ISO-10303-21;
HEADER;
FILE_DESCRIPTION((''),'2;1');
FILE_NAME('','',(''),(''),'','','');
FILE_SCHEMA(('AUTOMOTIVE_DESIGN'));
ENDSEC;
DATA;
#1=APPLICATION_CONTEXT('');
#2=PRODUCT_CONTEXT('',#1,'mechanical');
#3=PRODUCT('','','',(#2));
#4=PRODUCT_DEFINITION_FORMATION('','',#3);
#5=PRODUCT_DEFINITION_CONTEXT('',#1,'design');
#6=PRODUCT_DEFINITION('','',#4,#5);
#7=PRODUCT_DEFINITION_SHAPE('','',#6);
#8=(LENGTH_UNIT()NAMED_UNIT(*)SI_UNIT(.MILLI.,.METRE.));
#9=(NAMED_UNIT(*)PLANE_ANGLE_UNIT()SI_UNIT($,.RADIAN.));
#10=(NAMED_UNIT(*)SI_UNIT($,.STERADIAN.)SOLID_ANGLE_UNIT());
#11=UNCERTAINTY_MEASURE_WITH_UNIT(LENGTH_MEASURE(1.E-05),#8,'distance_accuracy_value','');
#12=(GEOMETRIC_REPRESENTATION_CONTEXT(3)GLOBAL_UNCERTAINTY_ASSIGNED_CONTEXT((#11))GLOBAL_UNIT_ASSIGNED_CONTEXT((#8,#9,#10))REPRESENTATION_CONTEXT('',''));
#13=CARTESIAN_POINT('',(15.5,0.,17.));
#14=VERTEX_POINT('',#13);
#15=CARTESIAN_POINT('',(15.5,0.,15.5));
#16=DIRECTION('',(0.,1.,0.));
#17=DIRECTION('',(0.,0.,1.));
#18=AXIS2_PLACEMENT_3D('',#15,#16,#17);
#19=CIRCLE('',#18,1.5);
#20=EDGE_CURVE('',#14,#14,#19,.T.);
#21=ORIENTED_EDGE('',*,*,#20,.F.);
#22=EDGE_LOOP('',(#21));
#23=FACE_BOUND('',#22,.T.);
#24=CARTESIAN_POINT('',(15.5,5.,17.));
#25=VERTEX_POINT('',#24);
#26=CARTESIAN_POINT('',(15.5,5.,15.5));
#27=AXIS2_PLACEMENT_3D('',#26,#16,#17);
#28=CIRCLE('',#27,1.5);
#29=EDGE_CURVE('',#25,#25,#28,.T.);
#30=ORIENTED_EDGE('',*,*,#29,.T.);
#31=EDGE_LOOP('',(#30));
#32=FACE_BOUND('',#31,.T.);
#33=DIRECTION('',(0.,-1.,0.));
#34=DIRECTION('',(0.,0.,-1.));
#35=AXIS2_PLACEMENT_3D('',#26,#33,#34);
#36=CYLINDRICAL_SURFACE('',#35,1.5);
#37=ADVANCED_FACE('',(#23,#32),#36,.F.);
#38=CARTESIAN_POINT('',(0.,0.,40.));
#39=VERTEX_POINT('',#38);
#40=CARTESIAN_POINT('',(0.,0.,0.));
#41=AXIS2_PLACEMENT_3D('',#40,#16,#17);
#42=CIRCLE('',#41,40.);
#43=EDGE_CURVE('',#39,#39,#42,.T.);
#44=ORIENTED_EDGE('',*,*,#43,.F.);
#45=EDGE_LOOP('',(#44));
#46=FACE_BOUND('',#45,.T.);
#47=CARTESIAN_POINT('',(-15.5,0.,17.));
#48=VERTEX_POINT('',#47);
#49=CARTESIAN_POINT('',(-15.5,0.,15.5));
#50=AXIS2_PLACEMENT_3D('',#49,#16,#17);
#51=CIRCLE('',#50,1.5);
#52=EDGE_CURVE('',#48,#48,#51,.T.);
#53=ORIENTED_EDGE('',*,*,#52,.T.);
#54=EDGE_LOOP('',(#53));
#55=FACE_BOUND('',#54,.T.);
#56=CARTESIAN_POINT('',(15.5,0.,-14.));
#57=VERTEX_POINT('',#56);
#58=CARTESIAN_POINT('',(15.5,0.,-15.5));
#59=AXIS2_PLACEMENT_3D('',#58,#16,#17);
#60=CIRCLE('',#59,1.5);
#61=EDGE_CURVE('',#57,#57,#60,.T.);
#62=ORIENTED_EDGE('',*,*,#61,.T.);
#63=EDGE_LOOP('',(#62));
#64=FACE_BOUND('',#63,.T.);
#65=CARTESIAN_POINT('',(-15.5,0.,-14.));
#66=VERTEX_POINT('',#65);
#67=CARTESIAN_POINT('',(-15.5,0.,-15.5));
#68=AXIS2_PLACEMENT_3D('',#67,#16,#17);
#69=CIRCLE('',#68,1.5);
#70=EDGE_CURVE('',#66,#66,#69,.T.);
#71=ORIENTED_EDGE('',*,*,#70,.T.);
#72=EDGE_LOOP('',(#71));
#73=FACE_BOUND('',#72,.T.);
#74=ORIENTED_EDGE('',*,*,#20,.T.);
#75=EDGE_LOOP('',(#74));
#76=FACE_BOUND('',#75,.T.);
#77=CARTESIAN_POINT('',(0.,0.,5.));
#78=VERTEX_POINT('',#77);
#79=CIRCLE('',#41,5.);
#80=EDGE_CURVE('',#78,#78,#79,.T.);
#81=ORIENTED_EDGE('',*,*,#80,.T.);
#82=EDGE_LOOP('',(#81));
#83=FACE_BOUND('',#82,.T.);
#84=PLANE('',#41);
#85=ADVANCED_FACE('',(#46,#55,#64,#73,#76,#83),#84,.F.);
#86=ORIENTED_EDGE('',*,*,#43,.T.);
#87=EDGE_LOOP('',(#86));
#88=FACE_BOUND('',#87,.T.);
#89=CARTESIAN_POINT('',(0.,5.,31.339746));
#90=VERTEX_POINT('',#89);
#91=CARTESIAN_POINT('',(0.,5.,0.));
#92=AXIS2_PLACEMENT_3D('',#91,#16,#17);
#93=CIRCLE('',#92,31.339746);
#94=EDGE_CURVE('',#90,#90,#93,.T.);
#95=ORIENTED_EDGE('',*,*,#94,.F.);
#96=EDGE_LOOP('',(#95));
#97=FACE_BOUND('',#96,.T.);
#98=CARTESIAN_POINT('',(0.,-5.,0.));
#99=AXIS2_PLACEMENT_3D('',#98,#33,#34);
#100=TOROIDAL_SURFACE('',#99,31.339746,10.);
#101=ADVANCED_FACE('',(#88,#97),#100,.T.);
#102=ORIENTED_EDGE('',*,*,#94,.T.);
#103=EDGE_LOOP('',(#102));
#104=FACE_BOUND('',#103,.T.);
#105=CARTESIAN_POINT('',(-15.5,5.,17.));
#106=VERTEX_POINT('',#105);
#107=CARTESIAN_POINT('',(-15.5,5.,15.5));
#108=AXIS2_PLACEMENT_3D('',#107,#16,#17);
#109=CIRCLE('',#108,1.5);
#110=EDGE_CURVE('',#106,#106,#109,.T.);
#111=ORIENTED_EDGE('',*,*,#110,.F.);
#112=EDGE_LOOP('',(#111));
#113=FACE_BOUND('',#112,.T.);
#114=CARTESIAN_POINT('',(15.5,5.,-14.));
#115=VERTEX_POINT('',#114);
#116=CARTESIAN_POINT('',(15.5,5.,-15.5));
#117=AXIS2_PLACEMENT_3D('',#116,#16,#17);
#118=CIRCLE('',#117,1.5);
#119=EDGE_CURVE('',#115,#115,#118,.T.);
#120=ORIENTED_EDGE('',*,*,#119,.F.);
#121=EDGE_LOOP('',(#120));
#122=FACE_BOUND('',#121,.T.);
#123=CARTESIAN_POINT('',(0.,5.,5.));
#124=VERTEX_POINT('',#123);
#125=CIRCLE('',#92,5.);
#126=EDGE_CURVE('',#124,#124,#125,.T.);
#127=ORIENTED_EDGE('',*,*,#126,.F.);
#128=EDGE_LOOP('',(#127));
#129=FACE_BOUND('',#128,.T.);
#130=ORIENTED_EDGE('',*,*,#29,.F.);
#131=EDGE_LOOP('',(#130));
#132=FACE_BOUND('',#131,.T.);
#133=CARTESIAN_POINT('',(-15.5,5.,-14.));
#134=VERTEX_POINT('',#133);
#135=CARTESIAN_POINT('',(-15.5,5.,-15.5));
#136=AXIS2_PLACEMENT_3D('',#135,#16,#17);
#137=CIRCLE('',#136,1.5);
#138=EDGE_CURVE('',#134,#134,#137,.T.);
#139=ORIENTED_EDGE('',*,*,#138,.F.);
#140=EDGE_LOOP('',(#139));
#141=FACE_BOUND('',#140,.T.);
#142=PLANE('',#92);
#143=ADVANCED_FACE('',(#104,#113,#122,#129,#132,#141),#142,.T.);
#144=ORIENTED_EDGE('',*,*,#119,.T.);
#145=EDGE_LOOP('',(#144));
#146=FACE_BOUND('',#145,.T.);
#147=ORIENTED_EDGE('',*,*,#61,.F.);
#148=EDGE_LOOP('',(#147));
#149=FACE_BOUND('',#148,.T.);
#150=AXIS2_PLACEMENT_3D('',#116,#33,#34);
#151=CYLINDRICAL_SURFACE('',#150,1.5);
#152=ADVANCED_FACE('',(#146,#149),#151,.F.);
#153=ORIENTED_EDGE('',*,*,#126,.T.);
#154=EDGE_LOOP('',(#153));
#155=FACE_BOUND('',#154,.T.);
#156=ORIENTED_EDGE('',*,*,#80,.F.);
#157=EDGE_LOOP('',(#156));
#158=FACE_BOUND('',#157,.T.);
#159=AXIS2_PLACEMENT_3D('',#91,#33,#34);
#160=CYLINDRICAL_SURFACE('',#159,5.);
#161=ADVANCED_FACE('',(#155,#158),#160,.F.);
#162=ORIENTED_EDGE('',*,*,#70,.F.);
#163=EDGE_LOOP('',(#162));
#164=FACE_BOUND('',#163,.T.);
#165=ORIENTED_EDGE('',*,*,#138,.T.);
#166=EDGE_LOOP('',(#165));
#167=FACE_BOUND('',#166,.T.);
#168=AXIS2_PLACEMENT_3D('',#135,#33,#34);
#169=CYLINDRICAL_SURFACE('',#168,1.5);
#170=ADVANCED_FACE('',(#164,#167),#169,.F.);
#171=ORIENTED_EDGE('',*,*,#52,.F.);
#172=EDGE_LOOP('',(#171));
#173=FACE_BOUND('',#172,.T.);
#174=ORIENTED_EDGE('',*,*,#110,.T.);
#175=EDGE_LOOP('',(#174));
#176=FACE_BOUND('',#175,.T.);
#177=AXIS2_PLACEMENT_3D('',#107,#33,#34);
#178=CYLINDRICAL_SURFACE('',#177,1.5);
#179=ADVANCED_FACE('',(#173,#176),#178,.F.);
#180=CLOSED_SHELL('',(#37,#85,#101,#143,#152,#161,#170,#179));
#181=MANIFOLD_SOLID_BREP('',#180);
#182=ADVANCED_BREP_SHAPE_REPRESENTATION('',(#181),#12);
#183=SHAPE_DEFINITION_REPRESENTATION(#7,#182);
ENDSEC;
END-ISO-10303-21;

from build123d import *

# Parameters (mm, degrees)
SKETCH1_R           = 40
SKETCH1_R_2         = 1.5
SKETCH1_R_3         = 5
BOSS_EXTRUDE1_DEPTH = 5
FILLET2_R           = 10


with BuildPart() as part:
    # Sketch1 → Boss-Extrude1 (new body)
    with BuildSketch(Plane(origin=(0, 0, 0), x_dir=(1, 0, 0), z_dir=(0, 1, 0))):
        with Locations(Location((0, 0, 0), (0, 0, 270))):
            Circle(SKETCH1_R)
        with Locations(Location((-15.5, 15.5, 0), (0, 0, 270))):
            Circle(SKETCH1_R_2, mode=Mode.SUBTRACT)
        with Locations(Location((15.5, 15.5, 0), (0, 0, 270))):
            Circle(SKETCH1_R_2, mode=Mode.SUBTRACT)
        with Locations(Location((-15.5, -15.5, 0), (0, 0, 270))):
            Circle(SKETCH1_R_2, mode=Mode.SUBTRACT)
        with Locations(Location((15.5, -15.5, 0), (0, 0, 270))):
            Circle(SKETCH1_R_2, mode=Mode.SUBTRACT)
        with Locations(Location((0, 0, 0), (0, 0, 270))):
            Circle(SKETCH1_R_3, mode=Mode.SUBTRACT)
    extrude(amount=BOSS_EXTRUDE1_DEPTH)

    # Fillet2
    # the kernel refuses this fillet: 10 mm, written as the material it takes off along each edge
    with BuildSketch(Plane(origin=(0, 5, 0), x_dir=(0, 0, 1), z_dir=(-1, 0, 0))) as fillet2_piece_1:
        with BuildLine():
            CenterArc((31.339745962, -10), FILLET2_R, 30, 60)
            Line((31.339745962, 0), (31.339745962, 0.2))
            Line((31.339745962, 0.2), (40, 0.2))
            Line((40, 0.2), (40.2, 0))
            ThreePointArc((40.2, 0), (40.2, -2.5), (40.173205081, -4.9))
            Line((40.173205081, -4.9), (40, -5))
        make_face()
    revolve(axis=Axis((0, 5, 0), (0, 1, 0)), mode=Mode.SUBTRACT)


solid = part.part
